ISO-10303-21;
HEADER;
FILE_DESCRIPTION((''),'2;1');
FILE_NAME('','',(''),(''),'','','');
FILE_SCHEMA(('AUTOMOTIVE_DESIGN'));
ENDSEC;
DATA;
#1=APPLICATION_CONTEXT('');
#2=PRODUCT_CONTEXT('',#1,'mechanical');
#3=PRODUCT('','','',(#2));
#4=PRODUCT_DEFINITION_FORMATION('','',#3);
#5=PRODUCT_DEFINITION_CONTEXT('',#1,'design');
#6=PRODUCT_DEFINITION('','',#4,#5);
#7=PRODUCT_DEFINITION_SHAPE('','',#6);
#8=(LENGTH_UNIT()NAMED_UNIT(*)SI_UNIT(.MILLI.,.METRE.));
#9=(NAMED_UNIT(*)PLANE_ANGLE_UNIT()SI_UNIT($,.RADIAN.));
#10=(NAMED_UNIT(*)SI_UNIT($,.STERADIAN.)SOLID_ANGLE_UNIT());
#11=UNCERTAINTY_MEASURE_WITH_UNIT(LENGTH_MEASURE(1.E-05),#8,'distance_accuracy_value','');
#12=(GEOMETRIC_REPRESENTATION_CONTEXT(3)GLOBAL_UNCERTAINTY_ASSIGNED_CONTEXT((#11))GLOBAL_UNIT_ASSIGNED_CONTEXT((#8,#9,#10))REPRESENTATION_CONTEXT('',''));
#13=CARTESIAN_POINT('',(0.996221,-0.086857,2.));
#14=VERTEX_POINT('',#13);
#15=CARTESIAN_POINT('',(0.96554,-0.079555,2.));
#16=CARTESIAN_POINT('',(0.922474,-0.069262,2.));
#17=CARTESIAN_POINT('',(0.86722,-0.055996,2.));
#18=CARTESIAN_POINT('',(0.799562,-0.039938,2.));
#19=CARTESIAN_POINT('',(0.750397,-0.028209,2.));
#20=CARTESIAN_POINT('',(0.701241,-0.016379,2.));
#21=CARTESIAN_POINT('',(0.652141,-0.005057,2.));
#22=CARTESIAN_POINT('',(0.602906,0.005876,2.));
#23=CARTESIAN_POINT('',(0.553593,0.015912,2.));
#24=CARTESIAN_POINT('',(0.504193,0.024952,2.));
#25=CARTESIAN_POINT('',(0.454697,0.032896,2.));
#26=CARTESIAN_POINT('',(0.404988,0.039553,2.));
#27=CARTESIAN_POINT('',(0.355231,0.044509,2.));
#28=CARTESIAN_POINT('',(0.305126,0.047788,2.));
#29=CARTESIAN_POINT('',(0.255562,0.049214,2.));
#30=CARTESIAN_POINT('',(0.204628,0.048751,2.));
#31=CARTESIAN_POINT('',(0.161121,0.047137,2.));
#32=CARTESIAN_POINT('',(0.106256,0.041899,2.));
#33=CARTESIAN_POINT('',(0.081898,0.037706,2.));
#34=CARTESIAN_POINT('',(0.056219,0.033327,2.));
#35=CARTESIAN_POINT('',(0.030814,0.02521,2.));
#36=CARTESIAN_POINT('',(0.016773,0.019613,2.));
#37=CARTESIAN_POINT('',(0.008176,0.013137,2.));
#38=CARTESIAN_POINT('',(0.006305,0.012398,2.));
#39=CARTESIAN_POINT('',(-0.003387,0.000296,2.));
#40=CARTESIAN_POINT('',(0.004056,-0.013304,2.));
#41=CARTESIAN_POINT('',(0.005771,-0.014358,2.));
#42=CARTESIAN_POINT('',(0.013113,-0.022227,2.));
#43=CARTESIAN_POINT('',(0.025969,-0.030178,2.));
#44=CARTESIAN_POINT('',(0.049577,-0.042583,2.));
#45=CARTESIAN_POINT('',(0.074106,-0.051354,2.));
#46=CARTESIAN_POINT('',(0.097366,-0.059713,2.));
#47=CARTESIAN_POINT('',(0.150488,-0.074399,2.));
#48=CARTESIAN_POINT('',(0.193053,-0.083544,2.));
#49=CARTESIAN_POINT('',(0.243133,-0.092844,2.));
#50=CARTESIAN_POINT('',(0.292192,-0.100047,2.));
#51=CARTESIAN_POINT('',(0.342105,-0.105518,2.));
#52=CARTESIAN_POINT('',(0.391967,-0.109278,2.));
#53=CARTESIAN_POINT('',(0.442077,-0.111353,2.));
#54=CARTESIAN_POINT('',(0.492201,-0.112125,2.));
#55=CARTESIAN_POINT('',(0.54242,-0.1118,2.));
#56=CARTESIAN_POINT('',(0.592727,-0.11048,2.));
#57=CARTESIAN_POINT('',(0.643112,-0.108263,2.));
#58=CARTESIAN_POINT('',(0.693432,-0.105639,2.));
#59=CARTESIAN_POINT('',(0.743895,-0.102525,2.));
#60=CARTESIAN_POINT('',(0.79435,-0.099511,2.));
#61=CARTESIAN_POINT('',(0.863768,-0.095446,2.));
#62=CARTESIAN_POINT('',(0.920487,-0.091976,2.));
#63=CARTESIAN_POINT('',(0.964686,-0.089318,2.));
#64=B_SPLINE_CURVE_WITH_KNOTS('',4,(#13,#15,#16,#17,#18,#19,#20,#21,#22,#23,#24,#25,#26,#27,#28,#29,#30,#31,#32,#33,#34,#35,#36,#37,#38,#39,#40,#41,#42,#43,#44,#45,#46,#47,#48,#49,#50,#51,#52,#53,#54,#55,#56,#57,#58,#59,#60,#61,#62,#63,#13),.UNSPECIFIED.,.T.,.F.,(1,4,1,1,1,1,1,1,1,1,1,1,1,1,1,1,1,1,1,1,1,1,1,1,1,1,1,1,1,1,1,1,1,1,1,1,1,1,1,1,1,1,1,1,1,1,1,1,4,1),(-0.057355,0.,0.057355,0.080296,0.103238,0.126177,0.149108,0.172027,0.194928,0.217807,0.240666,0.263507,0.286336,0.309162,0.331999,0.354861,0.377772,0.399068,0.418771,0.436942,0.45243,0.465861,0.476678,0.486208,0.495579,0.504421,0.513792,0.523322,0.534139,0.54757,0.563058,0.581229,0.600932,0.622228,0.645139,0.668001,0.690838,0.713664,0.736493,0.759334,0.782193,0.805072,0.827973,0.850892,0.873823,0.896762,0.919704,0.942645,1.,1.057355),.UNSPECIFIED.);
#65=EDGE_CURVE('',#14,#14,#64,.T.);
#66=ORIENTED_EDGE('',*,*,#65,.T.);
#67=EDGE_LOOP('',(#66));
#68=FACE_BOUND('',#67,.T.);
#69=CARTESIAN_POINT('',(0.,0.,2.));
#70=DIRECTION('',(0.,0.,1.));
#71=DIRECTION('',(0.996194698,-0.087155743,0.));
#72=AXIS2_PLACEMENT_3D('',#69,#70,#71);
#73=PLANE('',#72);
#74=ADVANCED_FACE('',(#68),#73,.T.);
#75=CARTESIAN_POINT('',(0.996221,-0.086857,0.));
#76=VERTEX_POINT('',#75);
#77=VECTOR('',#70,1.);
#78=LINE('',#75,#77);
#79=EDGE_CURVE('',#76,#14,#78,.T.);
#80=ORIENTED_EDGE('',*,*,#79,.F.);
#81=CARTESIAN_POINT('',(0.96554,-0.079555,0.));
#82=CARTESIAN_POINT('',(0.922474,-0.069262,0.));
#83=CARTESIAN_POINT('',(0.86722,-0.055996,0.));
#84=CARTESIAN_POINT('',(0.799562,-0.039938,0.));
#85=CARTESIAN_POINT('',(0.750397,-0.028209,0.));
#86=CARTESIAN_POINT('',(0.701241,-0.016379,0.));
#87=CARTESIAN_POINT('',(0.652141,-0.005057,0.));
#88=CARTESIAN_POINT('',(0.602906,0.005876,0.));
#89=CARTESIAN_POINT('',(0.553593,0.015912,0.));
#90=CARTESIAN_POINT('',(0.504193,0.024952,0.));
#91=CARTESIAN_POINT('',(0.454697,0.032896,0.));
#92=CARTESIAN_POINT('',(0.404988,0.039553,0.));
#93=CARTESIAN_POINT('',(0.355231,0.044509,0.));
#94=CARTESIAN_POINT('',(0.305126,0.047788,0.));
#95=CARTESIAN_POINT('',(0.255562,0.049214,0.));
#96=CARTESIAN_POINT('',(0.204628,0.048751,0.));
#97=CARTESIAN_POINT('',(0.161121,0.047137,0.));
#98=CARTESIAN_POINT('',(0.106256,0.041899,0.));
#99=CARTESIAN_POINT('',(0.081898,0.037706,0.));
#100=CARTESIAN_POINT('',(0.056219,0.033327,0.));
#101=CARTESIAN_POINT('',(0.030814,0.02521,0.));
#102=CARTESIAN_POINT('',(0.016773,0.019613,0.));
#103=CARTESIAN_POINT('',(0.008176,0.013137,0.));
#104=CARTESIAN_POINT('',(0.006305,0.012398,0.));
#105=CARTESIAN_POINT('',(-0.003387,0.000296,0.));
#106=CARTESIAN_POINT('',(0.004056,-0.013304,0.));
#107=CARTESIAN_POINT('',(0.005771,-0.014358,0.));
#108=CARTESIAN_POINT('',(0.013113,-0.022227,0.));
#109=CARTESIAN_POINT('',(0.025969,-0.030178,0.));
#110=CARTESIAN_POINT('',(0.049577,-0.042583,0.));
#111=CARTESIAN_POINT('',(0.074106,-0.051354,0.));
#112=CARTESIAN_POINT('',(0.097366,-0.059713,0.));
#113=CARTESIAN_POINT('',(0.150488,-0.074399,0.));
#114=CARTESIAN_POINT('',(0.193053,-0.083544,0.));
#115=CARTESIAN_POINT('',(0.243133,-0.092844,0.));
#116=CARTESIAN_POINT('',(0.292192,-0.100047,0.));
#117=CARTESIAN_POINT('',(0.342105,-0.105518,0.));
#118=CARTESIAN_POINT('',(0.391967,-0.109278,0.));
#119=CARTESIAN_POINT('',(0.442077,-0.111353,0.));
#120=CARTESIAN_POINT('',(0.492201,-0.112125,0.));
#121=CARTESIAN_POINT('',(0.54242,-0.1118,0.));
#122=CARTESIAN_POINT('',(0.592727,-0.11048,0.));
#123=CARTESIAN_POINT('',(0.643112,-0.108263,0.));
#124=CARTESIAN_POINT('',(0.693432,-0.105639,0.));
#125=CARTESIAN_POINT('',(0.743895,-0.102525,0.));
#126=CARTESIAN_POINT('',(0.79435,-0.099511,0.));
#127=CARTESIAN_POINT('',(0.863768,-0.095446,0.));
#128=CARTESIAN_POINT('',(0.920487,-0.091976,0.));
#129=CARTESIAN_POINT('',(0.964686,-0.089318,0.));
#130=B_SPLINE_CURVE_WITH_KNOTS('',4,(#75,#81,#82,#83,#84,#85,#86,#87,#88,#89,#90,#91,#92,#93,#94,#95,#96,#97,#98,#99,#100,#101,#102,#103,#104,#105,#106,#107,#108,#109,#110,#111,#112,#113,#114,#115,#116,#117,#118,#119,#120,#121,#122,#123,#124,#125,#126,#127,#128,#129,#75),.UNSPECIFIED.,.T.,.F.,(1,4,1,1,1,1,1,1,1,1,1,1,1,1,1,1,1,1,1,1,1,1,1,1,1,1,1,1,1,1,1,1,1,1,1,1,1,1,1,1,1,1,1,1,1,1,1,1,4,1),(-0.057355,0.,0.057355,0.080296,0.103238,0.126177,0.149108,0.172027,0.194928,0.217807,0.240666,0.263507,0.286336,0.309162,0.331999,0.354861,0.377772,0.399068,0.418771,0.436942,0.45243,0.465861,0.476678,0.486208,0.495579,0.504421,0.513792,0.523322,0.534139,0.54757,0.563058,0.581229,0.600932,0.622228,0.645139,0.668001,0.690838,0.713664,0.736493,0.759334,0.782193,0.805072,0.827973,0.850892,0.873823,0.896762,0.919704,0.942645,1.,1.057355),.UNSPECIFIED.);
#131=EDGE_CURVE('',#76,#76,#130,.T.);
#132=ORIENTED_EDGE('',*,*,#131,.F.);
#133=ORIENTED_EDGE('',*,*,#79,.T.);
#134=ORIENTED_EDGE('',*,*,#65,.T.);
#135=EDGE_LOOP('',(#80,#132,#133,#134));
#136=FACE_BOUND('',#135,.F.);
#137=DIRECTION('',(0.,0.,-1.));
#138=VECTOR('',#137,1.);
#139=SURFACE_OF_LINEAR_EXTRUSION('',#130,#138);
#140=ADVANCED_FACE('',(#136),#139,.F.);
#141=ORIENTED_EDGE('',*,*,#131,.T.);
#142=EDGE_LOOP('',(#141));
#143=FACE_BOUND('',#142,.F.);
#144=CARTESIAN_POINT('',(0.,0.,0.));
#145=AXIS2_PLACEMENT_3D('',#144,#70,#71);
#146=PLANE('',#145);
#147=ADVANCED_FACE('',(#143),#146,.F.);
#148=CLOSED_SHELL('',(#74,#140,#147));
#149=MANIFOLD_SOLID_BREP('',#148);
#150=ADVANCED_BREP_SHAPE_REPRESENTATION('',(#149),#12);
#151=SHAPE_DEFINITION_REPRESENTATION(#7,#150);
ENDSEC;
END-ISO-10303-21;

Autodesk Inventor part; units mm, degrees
ref_plane "YZ Plane" through (0, 0, 0) normal (1, 0, 0) x (0, 1, 0)
ref_plane "XZ Plane" through (0, 0, 0) normal (0, 1, 0) x (-1, 0, 0)
ref_plane "XY Plane" through (0, 0, 0) normal (0, 0, 1) x (1, 0, 0)
sketch "スケッチ1" plane through (0, 0, 0) normal (0, 0, 1) x (1, 0, 0)
  spline S0 degree 4 poles (1, 0.0003) (0.9688, 0.0049) (0.925, 0.0114) (0.8688, 0.0198) (0.8, 0.0299) (0.75, 0.0373) (0.7, 0.0448) (0.6501, 0.0518) (0.6001, 0.0584) (0.5501, 0.0641) (0.5001, 0.0688) (0.4501, 0.0724) (0.4, 0.0747) (0.35, 0.0753) (0.2998, 0.0742) (0.2503, 0.0713) (0.1996, 0.0664) (0.1564, 0.061) (0.1022, 0.051) (0.0783, 0.0447) (0.0531, 0.0381) (0.0285, 0.0278) (0.015, 0.021) (0.007, 0.0138) (0.0052, 0.0129) (-0.0034, 0) (0.0052, -0.0129) (0.007, -0.0138) (0.015, -0.021) (0.0285, -0.0278) (0.0531, -0.0381) (0.0783, -0.0447) (0.1022, -0.051) (0.1564, -0.061) (0.1996, -0.0664) (0.2503, -0.0713) (0.2998, -0.0742) (0.35, -0.0753) (0.4, -0.0747) (0.4501, -0.0724) (0.5001, -0.0688) (0.5501, -0.0641) (0.6001, -0.0584) (0.6501, -0.0518) (0.7, -0.0448) (0.75, -0.0373) (0.8, -0.0299) (0.8688, -0.0198) (0.925, -0.0114) (0.9688, -0.0049) (1, -0.0003) knots 0 0 0 0 0 0.057355 0.080296 0.103238 0.126177 0.149108 0.172027 0.194928 0.217807 0.240666 0.263507 0.286336 0.309162 0.331999 0.354861 0.377772 0.399068 0.418771 0.436942 0.45243 0.465861 0.476678 0.486208 0.495579 0.504421 0.513792 0.523322 0.534139 0.54757 0.563058 0.581229 0.600932 0.622228 0.645139 0.668001 0.690838 0.713664 0.736493 0.759334 0.782193 0.805072 0.827973 0.850892 0.873823 0.896762 0.919704 0.942645 1 1 1 1 1
  line L0 (1, 0.0003) -> (1, -0.0003)
  point P0 (0.95, 0.0077)
  point P1 (0.9, 0.0151)
  point P2 (0.85, 0.0225)
  point P3 (0.8, 0.0299)
  point P4 (0.75, 0.0373)
  point P5 (0.7, 0.0447)
  point P6 (0.65, 0.0517)
  point P7 (0.6, 0.0582)
  point P8 (0.55, 0.0639)
  point P9 (0.5, 0.0686)
  point P10 (0.45, 0.0722)
  point P11 (0.4, 0.0743)
  point P12 (0.35, 0.075)
  point P13 (0.3, 0.0738)
  point P14 (0.25, 0.0709)
  point P15 (0.2, 0.0662)
  point P16 (0.15, 0.0594)
  point P17 (0.1, 0.05)
  point P18 (0.075, 0.0438)
  point P19 (0.05, 0.0362)
  point P20 (0.025, 0.0258)
  point P21 (0.0125, 0.0184)
  point P22 (0.0075, 0.0145)
  point P23 (0.005, 0.012)
  point P24 (0, 0)
  point P25 (0.005, -0.012)
  point P26 (0.0075, -0.0145)
  point P27 (0.0125, -0.0184)
  point P28 (0.025, -0.0258)
  point P29 (0.05, -0.0362)
  point P30 (0.075, -0.0438)
  point P31 (0.1, -0.05)
  point P32 (0.15, -0.0594)
  point P33 (0.2, -0.0662)
  point P34 (0.25, -0.0709)
  point P35 (0.3, -0.0738)
  point P36 (0.35, -0.075)
  point P37 (0.4, -0.0743)
  point P38 (0.45, -0.0722)
  point P39 (0.5, -0.0686)
  point P40 (0.55, -0.0639)
  point P41 (0.6, -0.0582)
  point P42 (0.65, -0.0517)
  point P43 (0.7, -0.0447)
  point P44 (0.75, -0.0373)
  point P45 (0.8, -0.0299)
  point P46 (0.85, -0.0225)
  point P47 (0.9, -0.0151)
  point P48 (0.95, -0.0077)
extrude "押し出し1" add sketch "スケッチ1" along normal blind 2
sketch "スケッチ2" plane through (0, 0, 2) normal (0, 0, 1) x (1, 0, 0)
  line L0 (-10, 10) -> (10, 10)
  line L1 (10, 10) -> (10, -10)
  line L2 (10, -10) -> (-10, -10)
  line L3 (-10, -10) -> (-10, 10)
  point P0 (0, 0)
  dimension "d2" = 20
  dimension "d3" = 20
  dimension "d5" = 10
  dimension "d12" = 10
surface extrude "押し出しサーフェス1" sketch "スケッチ2" against normal blind 2 shown yes curves L0 L1 L2 L3
sketch "スケッチ3" plane through (-10, 10, 2) normal (0, 1, 0) x (1, 0, 0)
  line L0 (0, 0) -> (20, 0) projected
  line L1 (0, 2) -> (20, 2) projected
  point P0 (10, 2)
surface extrude "押し出しサーフェス2" sketch "スケッチ3" against normal up to surface (20 mm away) shown yes curves L1
sketch "スケッチ4" plane through (-10, 10, 2) normal (0, 1, 0) x (1, 0, 0)
  line L0 (0, 0) -> (20, 0) projected
  point P0 (10, 2)
surface extrude "押し出しサーフェス3" sketch "スケッチ4" against normal up to surface (20 mm away) shown yes curves L0
move or copy body "ボディを移動1" bodies to move or copy 1 copy no rotation origin (0, 0, 0) rotation axis (0, 0, 1) rotation angle -5
properties part number "NACA63-015"
